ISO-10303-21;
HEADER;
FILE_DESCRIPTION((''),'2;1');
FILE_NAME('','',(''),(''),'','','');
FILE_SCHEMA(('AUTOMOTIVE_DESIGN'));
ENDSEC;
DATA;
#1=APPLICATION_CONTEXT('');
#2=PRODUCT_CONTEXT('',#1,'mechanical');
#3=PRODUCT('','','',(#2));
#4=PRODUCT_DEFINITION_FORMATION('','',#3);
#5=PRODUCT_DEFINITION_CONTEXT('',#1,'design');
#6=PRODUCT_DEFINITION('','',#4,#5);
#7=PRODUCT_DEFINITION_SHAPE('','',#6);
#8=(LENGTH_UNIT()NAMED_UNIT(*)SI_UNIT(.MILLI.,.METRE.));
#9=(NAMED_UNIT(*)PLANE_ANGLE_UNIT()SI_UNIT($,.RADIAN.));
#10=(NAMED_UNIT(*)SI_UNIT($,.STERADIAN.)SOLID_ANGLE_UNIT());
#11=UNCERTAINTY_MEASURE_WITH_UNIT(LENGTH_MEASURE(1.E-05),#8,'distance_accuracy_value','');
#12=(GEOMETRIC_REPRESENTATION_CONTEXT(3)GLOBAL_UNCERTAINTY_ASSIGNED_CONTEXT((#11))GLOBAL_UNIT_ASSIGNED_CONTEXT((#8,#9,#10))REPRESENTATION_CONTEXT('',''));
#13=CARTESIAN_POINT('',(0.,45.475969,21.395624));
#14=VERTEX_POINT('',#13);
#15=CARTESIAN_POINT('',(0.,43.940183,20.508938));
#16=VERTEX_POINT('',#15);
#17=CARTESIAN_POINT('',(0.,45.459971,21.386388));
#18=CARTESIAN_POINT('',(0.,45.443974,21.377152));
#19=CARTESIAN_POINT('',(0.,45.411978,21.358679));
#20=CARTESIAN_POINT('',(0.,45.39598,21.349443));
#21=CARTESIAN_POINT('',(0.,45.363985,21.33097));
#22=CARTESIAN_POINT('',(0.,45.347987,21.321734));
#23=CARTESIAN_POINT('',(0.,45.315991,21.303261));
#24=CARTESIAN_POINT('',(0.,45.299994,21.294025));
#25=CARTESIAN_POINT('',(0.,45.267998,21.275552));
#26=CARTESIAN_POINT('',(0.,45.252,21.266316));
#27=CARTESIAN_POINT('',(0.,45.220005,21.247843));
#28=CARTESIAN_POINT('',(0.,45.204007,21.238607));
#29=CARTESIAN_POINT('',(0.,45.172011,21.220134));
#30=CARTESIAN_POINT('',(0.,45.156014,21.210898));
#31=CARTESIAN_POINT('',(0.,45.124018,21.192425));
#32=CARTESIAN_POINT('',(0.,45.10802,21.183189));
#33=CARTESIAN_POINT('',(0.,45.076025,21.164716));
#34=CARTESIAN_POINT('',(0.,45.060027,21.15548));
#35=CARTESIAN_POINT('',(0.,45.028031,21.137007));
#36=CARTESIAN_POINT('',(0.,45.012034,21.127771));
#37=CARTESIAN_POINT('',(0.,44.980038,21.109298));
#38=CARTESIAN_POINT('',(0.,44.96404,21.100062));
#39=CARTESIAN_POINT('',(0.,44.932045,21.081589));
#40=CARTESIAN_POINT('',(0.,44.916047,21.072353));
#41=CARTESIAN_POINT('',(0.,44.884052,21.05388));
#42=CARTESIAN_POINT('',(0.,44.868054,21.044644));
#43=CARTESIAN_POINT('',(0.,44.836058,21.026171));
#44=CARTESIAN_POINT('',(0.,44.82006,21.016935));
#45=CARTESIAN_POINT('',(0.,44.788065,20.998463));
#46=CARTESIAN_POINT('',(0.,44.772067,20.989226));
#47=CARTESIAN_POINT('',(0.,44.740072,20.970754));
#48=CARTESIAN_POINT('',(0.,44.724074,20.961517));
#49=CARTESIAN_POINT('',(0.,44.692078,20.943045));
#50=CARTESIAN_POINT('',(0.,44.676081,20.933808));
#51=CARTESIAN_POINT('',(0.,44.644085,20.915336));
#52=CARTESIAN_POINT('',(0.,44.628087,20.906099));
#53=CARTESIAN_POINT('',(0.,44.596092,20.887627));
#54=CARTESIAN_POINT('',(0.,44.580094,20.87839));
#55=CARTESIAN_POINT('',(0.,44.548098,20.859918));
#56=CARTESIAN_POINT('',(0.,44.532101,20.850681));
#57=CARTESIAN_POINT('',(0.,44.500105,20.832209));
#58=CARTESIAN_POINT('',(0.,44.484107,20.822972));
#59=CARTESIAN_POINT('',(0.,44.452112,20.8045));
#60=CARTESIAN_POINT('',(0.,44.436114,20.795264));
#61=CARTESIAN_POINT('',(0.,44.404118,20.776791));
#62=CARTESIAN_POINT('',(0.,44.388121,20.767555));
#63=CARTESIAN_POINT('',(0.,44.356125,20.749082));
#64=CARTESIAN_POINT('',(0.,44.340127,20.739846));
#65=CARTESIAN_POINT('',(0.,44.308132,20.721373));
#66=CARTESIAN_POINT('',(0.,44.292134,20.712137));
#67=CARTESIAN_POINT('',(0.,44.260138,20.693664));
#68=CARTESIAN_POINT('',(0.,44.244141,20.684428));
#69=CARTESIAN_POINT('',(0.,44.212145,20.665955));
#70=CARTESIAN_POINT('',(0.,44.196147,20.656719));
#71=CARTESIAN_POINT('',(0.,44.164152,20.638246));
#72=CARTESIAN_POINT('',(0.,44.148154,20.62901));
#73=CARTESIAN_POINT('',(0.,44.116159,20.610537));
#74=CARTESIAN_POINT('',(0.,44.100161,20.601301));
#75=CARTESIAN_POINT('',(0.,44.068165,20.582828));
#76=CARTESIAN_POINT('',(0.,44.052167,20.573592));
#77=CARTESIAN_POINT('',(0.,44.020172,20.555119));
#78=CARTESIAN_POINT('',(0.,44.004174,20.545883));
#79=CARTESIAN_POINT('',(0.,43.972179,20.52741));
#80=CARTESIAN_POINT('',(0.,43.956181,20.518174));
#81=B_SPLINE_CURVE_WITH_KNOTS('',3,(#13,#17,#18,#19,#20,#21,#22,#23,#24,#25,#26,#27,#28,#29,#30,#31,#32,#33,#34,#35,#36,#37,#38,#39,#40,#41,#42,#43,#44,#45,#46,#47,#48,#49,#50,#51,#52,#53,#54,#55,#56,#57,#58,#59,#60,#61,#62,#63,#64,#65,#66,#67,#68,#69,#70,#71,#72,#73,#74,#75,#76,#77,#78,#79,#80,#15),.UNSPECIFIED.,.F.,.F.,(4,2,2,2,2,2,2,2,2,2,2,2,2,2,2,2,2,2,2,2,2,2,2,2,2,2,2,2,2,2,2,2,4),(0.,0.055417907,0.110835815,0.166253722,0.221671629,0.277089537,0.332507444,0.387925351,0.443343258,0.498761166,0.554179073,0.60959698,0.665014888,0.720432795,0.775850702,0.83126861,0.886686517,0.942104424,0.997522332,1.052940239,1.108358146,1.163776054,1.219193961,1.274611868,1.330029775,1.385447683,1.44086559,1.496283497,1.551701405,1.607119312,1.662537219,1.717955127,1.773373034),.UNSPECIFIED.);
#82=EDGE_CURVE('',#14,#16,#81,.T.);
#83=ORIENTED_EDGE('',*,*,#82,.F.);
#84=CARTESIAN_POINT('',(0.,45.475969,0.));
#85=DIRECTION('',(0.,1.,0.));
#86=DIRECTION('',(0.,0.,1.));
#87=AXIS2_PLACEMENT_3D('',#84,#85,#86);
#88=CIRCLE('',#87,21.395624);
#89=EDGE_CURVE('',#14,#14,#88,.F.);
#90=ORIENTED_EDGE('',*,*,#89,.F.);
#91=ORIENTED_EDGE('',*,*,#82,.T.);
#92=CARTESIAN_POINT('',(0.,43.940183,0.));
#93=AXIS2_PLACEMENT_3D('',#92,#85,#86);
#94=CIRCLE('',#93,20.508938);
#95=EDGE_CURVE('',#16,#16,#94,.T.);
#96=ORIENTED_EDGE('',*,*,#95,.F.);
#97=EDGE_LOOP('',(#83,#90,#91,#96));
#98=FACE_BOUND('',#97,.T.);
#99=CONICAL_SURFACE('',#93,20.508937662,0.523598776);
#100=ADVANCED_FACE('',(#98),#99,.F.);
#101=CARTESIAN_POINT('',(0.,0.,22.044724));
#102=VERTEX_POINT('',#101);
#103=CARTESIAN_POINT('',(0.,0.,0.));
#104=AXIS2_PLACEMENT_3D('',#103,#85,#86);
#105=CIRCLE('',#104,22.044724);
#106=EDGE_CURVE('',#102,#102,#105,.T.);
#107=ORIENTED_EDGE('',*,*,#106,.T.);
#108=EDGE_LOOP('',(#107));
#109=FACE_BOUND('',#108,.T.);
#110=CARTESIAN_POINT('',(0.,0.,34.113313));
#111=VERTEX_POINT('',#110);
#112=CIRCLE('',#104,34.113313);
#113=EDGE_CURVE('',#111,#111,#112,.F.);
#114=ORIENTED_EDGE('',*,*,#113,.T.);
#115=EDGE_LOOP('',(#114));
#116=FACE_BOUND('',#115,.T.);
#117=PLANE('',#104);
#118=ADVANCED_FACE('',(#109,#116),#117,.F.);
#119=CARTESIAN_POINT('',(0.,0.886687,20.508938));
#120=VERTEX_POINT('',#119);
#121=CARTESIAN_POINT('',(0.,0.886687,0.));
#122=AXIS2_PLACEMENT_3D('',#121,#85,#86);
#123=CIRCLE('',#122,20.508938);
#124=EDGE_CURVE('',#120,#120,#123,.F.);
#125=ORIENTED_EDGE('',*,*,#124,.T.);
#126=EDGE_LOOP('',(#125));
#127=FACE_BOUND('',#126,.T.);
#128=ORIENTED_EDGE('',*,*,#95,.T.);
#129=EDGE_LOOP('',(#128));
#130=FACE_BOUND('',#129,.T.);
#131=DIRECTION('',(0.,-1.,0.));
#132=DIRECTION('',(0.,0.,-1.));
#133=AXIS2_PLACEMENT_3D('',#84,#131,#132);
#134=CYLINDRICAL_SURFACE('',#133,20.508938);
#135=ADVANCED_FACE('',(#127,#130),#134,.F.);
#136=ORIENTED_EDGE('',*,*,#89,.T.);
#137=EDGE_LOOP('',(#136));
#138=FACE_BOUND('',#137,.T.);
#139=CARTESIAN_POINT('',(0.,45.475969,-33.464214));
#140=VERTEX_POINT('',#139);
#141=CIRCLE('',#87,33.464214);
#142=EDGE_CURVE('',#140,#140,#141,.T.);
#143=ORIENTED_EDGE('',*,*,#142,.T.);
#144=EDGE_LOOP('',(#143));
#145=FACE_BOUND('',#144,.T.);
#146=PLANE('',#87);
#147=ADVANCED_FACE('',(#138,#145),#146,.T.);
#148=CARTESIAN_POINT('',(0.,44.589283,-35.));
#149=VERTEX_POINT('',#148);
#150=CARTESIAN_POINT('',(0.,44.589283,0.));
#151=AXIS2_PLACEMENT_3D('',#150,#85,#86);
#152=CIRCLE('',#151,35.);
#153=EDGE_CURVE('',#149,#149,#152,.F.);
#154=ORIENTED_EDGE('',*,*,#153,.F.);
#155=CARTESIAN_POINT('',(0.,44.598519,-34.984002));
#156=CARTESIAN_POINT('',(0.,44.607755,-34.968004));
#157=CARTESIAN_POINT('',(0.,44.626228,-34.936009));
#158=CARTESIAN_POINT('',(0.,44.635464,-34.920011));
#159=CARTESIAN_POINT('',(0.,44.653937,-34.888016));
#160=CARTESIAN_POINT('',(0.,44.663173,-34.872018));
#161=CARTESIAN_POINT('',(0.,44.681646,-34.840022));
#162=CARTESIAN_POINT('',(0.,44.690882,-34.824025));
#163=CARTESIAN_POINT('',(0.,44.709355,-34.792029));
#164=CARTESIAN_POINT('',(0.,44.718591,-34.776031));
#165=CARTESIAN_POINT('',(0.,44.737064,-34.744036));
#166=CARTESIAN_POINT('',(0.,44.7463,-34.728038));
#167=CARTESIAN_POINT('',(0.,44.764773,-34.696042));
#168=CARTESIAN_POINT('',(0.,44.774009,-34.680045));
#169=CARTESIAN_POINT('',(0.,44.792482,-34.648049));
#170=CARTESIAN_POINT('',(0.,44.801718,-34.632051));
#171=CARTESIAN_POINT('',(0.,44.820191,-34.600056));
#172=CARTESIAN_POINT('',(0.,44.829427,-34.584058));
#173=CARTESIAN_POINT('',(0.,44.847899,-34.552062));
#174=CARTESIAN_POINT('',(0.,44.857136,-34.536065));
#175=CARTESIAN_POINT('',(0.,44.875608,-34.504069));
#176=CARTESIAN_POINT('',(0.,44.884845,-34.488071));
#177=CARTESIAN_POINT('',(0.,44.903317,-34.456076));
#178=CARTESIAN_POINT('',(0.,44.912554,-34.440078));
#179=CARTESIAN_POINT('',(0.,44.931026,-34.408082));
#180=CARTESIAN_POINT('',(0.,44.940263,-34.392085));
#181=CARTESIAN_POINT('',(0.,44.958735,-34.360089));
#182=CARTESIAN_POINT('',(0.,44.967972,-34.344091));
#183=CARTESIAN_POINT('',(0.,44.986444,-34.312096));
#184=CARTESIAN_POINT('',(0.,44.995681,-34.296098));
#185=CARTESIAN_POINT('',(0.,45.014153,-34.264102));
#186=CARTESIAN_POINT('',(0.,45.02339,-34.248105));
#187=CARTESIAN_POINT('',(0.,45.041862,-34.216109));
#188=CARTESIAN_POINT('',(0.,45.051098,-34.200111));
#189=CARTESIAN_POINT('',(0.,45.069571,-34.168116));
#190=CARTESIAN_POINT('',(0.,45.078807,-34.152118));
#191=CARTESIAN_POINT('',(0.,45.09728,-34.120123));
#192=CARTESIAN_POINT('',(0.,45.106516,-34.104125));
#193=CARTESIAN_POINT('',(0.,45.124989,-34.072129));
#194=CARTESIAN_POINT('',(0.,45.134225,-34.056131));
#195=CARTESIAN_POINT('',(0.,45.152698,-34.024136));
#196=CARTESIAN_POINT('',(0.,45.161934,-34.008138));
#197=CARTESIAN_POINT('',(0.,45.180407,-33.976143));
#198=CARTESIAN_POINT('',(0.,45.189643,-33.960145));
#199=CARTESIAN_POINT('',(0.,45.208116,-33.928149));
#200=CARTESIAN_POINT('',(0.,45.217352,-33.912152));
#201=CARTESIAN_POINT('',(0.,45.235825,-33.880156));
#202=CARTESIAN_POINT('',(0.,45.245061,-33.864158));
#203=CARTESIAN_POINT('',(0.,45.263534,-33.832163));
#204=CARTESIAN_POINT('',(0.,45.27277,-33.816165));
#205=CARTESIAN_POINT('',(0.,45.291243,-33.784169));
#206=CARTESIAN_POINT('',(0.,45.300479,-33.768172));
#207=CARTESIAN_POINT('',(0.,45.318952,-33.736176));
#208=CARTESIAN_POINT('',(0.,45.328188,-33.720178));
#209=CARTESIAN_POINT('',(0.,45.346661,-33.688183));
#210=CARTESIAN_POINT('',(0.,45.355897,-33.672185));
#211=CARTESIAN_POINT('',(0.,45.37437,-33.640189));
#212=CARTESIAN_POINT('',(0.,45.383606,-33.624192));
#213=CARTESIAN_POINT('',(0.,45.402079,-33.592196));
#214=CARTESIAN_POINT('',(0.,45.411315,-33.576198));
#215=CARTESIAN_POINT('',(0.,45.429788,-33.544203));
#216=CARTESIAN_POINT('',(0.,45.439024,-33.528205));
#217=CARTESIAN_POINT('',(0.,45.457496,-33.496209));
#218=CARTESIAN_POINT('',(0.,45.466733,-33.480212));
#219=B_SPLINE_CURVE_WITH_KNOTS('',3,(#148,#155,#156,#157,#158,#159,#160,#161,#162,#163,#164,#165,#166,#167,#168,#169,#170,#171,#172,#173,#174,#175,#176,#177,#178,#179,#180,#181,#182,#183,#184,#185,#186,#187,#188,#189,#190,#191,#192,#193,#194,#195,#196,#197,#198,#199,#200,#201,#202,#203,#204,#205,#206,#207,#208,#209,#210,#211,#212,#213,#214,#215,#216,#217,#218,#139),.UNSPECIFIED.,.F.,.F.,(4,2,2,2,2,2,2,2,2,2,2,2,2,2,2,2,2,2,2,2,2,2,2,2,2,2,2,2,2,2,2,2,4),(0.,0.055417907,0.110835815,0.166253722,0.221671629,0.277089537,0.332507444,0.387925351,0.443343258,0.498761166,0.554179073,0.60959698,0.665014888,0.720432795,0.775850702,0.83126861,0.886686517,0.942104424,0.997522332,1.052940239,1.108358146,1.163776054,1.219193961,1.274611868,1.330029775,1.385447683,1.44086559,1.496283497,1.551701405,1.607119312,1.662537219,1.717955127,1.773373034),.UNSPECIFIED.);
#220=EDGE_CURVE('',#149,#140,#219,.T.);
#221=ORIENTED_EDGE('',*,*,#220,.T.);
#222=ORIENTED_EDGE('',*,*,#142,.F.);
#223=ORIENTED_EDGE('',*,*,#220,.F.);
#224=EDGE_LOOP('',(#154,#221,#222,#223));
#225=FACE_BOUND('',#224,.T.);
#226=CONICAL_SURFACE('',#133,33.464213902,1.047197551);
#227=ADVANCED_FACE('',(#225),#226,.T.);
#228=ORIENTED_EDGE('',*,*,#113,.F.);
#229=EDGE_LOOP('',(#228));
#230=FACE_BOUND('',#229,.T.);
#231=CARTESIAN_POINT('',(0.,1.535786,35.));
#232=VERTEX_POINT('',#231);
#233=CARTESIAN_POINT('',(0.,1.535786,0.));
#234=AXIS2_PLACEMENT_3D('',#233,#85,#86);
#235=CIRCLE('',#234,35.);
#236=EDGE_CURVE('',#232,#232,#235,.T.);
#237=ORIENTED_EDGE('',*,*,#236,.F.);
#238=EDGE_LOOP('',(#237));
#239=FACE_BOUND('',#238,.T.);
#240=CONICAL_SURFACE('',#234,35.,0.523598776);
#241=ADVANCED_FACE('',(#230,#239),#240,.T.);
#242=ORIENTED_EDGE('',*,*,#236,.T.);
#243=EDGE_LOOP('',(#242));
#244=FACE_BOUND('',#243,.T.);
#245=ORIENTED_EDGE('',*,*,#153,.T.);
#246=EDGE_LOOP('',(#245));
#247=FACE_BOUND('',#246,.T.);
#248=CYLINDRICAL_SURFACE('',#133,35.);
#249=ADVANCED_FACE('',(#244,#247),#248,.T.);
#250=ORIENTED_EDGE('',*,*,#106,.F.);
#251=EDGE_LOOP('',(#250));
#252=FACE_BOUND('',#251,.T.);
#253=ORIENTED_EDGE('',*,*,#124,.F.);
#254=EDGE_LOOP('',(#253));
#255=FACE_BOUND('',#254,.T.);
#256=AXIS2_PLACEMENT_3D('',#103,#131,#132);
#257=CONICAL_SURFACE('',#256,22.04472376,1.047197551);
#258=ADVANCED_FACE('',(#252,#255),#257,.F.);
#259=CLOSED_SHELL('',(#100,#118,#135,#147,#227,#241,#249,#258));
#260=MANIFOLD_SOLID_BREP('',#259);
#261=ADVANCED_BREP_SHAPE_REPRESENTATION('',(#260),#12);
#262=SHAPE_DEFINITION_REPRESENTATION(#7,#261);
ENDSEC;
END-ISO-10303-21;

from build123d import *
from OCP.BRepFilletAPI import BRepFilletAPI_MakeChamfer

# Parameters (mm, degrees)
SKETCH1_R           = 35
BOSS_EXTRUDE1_DEPTH = 45.475969111
SKETCH2_R           = 20.508937662
CUT_EXTRUDE1_DEPTH  = 68.216543846
CHAMFER1_SIZE       = 0.886686517
CHAMFER1_SIZE2      = 1.535786098


with BuildPart() as part:
    # Sketch1 → Boss-Extrude1 (new body)
    with BuildSketch(Plane(origin=(0, 0, 0), x_dir=(1, 0, 0), z_dir=(0, 1, 0))):
        Circle(SKETCH1_R)
    extrude(amount=BOSS_EXTRUDE1_DEPTH)

    # Sketch2 → Cut-Extrude1 (cut, through all)
    with BuildSketch(Plane(origin=(0, 0, 0), x_dir=(1, 0, 0), z_dir=(0, 1, 0))):
        Circle(SKETCH2_R)
    extrude(amount=CUT_EXTRUDE1_DEPTH, mode=Mode.SUBTRACT)

    # Chamfer1: one chamfer whose edges measure the first distance from different faces: ONE call of the kernel's chamfer builder (chamfer() names one face for all edges)
    chamfer1_edges_1 = [part.edges().sort_by_distance(p)[0] for p in [
        (-20.508937662, 45.475969111, 0),
    ]]
    chamfer1_side_1 = [part.faces().sort_by_distance(p)[0] for p in [
        (-34.010050506, 45.475969111, 0),
    ]]
    chamfer1_edges_2 = [part.edges().sort_by_distance(p)[0] for p in [
        (-20.508937662, 0, 0),
    ]]
    chamfer1_side_2 = [part.faces().sort_by_distance(p)[0] for p in [
        (-20.508937662, 22.737984555, 0),
    ]]
    chamfer1_edges_3 = [part.edges().sort_by_distance(p)[0] for p in [
        (-35, 0, 0),
    ]]
    chamfer1_side_3 = [part.faces().sort_by_distance(p)[0] for p in [
        (-34.010050506, 0, 0),
    ]]
    chamfer1_edges_4 = [part.edges().sort_by_distance(p)[0] for p in [
        (-35, 45.475969111, 0),
    ]]
    chamfer1_side_4 = [part.faces().sort_by_distance(p)[0] for p in [
        (-35, 22.737984555, 0),
    ]]
    chamfer1 = BRepFilletAPI_MakeChamfer(part.part.solid().wrapped)
    for e in chamfer1_edges_1:
        chamfer1.Add(CHAMFER1_SIZE, CHAMFER1_SIZE2, e.wrapped, chamfer1_side_1[0].wrapped)  # the first distance lies on this face
    for e in chamfer1_edges_2:
        chamfer1.Add(CHAMFER1_SIZE, CHAMFER1_SIZE2, e.wrapped, chamfer1_side_2[0].wrapped)  # the first distance lies on this face
    for e in chamfer1_edges_3:
        chamfer1.Add(CHAMFER1_SIZE, CHAMFER1_SIZE2, e.wrapped, chamfer1_side_3[0].wrapped)  # the first distance lies on this face
    for e in chamfer1_edges_4:
        chamfer1.Add(CHAMFER1_SIZE, CHAMFER1_SIZE2, e.wrapped, chamfer1_side_4[0].wrapped)  # the first distance lies on this face
    add(Compound.cast(chamfer1.Shape()), mode=Mode.REPLACE)


solid = part.part
